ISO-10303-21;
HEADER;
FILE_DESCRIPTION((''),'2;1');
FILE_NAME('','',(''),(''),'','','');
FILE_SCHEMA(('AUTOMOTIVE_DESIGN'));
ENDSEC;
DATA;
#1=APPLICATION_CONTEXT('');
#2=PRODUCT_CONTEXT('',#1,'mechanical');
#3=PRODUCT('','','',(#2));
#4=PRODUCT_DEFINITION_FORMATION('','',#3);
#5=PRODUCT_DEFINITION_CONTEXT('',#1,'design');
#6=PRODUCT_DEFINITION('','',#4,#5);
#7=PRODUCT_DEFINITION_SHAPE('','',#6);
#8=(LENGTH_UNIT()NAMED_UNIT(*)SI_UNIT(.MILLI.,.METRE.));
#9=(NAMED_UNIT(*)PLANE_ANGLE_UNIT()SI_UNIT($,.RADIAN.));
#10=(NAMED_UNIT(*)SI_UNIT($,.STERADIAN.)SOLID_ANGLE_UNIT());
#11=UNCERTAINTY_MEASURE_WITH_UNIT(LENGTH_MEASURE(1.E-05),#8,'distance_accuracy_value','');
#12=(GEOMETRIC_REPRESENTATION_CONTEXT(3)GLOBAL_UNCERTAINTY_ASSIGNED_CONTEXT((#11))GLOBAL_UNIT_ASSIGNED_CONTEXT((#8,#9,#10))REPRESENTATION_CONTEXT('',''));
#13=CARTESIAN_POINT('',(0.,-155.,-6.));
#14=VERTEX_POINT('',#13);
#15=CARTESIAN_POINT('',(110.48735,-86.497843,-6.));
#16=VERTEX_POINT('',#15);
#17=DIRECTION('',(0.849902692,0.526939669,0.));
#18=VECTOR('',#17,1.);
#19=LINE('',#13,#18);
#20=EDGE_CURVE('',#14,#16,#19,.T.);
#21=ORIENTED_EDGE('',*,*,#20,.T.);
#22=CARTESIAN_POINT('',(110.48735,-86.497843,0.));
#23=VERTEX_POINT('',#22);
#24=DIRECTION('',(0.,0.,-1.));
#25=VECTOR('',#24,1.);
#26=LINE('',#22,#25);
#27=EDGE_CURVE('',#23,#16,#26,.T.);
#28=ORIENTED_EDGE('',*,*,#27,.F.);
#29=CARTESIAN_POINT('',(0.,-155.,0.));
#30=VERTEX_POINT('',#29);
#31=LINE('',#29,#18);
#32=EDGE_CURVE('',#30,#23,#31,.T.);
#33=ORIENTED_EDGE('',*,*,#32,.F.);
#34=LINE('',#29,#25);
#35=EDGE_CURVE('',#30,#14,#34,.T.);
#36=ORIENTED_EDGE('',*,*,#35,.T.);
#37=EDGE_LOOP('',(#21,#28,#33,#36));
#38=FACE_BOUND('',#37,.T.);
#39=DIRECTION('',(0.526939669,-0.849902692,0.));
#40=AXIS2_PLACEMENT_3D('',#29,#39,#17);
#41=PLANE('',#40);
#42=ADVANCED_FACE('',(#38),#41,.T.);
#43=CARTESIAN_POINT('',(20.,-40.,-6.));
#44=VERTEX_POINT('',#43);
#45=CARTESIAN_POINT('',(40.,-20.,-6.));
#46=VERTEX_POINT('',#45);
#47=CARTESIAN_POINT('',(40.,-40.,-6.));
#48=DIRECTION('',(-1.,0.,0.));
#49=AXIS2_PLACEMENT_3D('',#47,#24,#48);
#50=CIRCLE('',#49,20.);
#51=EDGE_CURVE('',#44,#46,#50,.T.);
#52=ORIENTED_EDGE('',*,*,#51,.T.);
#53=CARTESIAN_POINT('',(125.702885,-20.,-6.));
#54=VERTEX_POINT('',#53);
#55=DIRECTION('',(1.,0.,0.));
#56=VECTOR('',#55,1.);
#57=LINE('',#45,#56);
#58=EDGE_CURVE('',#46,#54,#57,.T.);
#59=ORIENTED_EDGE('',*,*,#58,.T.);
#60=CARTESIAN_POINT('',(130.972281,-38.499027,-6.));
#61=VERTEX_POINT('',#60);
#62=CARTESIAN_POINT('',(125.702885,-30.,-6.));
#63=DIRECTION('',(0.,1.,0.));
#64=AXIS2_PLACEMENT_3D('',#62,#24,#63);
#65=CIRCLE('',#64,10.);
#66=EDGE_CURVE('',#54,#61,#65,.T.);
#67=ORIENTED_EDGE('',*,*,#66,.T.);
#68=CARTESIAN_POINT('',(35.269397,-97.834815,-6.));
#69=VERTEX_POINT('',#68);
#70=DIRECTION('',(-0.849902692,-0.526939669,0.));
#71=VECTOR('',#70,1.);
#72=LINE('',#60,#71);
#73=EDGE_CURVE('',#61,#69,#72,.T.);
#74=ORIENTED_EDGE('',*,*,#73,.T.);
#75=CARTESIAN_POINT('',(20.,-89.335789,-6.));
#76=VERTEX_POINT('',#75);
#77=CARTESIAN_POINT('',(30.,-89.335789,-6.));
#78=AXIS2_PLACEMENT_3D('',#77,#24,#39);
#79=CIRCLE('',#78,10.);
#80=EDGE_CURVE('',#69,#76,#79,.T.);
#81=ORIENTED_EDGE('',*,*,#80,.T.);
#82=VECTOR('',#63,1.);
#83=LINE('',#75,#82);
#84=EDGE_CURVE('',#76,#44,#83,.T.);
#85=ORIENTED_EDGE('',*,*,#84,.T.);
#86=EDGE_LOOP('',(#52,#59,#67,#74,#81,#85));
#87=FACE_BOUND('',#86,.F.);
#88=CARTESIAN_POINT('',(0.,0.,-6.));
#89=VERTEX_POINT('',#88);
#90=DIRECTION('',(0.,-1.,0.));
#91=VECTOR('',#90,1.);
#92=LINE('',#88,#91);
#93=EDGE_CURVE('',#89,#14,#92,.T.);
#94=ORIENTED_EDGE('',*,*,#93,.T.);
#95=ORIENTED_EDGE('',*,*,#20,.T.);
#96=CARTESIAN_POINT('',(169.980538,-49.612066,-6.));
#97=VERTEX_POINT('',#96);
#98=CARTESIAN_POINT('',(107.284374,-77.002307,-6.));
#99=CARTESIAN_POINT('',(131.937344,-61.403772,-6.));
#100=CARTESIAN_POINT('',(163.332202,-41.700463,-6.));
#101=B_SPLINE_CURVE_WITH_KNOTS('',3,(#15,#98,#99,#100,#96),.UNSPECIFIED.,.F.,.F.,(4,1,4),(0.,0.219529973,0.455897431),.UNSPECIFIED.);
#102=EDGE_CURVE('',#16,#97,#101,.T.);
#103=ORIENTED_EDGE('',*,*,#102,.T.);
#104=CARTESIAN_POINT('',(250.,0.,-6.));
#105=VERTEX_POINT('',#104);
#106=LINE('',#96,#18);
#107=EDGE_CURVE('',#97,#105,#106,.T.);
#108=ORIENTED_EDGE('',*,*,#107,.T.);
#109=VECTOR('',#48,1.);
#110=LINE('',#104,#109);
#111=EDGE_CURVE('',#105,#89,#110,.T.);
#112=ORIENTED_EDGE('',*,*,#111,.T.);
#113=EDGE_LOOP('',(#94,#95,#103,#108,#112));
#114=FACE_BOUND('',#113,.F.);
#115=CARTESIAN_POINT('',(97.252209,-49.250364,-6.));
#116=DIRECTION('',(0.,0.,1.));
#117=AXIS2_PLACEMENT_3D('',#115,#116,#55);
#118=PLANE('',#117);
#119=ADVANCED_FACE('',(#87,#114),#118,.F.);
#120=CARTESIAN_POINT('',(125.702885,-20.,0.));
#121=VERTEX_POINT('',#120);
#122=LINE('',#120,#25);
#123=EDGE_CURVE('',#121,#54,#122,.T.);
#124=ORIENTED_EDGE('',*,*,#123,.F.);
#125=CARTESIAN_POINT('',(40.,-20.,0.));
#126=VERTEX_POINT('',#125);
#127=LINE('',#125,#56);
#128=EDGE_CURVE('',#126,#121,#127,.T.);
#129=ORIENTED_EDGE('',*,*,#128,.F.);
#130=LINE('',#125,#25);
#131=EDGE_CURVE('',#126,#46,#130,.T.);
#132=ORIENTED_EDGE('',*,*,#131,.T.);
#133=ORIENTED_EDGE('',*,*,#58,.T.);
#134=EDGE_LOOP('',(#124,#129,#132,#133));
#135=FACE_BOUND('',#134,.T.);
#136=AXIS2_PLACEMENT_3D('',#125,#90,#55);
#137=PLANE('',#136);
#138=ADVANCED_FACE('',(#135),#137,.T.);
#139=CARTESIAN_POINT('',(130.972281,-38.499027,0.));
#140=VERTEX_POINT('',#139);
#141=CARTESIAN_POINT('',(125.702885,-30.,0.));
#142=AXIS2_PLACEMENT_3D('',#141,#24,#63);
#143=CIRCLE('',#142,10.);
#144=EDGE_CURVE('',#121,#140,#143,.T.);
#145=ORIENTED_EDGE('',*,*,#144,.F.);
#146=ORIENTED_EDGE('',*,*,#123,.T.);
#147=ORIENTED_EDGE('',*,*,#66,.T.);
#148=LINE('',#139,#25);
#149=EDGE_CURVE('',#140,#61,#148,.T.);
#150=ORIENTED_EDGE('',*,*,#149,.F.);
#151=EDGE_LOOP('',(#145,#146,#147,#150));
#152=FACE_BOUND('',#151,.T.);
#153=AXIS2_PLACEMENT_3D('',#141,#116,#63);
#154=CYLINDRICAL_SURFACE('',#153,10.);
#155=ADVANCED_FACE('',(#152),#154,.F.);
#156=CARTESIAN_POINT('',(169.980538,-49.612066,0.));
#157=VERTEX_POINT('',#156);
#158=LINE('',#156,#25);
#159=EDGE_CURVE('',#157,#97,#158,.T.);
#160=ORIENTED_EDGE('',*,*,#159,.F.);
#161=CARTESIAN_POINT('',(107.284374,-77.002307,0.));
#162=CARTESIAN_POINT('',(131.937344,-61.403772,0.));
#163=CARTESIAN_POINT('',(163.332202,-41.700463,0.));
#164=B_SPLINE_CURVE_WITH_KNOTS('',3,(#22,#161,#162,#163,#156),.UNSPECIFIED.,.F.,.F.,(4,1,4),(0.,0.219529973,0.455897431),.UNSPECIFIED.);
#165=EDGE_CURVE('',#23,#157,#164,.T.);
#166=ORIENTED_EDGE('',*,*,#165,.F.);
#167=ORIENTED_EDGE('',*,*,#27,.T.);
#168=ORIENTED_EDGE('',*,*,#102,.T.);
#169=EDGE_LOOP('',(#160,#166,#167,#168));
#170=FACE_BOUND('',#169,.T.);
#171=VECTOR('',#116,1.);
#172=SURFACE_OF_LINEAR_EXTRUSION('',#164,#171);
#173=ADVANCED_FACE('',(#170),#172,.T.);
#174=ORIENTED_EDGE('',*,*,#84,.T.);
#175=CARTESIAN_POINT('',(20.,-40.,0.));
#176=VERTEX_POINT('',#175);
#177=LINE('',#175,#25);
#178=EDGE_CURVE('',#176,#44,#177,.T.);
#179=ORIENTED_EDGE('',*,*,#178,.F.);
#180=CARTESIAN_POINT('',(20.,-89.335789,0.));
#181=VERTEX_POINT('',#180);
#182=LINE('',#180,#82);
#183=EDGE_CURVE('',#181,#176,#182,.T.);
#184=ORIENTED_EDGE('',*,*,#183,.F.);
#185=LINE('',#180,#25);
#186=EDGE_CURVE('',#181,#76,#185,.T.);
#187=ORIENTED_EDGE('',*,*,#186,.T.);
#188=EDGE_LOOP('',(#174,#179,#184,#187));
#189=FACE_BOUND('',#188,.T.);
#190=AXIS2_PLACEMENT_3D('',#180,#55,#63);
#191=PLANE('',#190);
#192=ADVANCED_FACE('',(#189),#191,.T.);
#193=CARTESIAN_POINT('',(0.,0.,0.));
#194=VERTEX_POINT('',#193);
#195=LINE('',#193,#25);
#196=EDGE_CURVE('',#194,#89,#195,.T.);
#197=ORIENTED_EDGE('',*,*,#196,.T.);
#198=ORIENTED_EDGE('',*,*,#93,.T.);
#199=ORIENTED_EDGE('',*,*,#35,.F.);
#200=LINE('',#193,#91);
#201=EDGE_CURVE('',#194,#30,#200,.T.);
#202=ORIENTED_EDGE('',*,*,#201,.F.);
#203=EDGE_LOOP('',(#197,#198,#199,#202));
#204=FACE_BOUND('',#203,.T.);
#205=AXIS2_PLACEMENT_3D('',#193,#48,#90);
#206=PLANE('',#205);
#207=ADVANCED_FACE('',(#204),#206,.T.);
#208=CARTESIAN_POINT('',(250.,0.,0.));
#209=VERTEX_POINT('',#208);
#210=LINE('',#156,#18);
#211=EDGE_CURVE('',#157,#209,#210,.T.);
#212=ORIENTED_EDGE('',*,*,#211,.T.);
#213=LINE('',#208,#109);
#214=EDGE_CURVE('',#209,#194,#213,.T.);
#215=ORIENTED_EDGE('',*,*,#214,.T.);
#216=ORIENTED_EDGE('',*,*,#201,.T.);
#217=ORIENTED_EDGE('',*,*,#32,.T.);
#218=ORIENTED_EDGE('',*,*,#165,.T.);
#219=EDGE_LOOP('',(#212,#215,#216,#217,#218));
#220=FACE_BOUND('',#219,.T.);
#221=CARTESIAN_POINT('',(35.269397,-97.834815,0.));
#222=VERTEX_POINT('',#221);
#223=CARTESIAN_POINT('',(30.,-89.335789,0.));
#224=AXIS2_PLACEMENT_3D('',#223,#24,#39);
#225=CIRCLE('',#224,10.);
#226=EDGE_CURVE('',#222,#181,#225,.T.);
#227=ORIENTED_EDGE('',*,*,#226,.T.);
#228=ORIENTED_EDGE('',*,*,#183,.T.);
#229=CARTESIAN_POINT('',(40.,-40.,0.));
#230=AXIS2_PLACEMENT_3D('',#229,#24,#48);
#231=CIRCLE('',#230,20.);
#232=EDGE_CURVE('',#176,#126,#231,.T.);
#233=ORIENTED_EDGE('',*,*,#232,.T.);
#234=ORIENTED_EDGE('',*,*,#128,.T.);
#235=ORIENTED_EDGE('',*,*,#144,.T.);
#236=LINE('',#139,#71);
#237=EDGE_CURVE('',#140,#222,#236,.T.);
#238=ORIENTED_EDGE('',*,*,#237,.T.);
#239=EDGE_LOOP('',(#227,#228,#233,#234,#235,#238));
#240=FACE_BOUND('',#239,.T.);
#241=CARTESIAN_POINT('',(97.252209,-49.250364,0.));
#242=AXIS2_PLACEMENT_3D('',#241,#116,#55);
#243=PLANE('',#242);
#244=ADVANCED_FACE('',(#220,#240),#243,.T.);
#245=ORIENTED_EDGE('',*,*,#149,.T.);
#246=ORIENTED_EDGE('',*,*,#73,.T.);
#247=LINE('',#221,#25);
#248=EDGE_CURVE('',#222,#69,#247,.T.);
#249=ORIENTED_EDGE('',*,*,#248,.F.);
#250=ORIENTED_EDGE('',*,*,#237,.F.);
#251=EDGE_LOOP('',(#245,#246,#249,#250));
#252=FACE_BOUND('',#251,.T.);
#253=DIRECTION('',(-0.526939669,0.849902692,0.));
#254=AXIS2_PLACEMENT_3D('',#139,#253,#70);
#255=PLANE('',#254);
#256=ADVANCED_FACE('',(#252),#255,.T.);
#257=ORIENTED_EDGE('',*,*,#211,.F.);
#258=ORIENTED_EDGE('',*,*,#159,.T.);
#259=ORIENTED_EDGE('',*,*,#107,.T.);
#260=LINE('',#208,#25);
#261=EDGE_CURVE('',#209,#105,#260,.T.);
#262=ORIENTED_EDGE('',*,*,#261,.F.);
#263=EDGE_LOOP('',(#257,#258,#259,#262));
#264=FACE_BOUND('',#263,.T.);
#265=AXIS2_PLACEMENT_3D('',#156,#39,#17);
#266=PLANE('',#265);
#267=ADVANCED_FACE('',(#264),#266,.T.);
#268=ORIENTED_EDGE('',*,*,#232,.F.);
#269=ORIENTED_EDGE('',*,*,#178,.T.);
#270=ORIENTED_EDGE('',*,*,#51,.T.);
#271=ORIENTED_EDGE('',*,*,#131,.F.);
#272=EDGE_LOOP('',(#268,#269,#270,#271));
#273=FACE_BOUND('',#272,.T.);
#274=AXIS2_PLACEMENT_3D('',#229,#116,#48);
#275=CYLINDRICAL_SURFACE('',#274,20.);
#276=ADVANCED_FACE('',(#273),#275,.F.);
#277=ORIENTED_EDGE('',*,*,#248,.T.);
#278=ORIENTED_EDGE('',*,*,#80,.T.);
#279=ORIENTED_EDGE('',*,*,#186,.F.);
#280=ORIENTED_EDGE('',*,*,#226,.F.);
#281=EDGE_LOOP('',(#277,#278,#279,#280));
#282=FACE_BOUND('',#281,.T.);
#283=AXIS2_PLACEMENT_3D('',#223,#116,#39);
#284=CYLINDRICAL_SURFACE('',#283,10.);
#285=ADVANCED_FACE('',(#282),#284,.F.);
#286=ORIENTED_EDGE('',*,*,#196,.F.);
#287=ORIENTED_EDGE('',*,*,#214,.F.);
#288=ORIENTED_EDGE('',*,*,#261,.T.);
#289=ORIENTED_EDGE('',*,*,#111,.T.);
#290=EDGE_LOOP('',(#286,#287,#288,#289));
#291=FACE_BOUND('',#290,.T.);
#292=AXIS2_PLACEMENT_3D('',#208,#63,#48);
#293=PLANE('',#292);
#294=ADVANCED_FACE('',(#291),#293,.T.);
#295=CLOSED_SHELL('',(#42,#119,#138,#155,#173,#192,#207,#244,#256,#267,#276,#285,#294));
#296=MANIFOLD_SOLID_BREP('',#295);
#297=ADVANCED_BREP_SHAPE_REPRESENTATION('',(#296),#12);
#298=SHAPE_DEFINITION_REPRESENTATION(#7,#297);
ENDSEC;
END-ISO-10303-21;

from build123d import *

# Parameters (mm, degrees)
F1_DEPTH = 6


with BuildPart() as f1:
    # F0 (on Top) → F1 (new body)
    with BuildSketch(Plane.XY):
        with BuildLine():
            Line((250, 0), (0, 0))
            Line((0, 0), (0, -155))
            Line((0, -155), (110.4873499226, -86.497843048))
            add(Edge.make_bspline(
                [(110.4873499226, -86.497843048), (107.2843735439, -77.0023074484), (131.9373436968, -61.4037722235), (163.3322021719, -41.7004632777), (169.9805383425, -49.6120662277)],
                knots=[0, 0, 0, 0, 0.2195299732, 0.4558974308, 0.4558974308, 0.4558974308, 0.4558974308], degree=3))
            Line((169.9805383425, -49.6120662277), (250, 0))
        make_face()
        with BuildLine():
            Line((20, -89.3357885437), (20, -40))
            ThreePointArc((20, -40), (25.8578643763, -25.8578643763), (40, -20))
            Line((40, -20), (125.702884748, -20))
            ThreePointArc((125.702884748, -20), (135.3203238346, -27.2604990574), (130.9722814366, -38.4990269171))
            Line((130.9722814366, -38.4990269171), (35.2693966886, -97.8348154609))
            ThreePointArc((35.2693966886, -97.8348154609), (25.1365632977, -98.0734646331), (20, -89.3357885437))
        make_face(mode=Mode.SUBTRACT)
    extrude(amount=-F1_DEPTH)


solid = f1.part
